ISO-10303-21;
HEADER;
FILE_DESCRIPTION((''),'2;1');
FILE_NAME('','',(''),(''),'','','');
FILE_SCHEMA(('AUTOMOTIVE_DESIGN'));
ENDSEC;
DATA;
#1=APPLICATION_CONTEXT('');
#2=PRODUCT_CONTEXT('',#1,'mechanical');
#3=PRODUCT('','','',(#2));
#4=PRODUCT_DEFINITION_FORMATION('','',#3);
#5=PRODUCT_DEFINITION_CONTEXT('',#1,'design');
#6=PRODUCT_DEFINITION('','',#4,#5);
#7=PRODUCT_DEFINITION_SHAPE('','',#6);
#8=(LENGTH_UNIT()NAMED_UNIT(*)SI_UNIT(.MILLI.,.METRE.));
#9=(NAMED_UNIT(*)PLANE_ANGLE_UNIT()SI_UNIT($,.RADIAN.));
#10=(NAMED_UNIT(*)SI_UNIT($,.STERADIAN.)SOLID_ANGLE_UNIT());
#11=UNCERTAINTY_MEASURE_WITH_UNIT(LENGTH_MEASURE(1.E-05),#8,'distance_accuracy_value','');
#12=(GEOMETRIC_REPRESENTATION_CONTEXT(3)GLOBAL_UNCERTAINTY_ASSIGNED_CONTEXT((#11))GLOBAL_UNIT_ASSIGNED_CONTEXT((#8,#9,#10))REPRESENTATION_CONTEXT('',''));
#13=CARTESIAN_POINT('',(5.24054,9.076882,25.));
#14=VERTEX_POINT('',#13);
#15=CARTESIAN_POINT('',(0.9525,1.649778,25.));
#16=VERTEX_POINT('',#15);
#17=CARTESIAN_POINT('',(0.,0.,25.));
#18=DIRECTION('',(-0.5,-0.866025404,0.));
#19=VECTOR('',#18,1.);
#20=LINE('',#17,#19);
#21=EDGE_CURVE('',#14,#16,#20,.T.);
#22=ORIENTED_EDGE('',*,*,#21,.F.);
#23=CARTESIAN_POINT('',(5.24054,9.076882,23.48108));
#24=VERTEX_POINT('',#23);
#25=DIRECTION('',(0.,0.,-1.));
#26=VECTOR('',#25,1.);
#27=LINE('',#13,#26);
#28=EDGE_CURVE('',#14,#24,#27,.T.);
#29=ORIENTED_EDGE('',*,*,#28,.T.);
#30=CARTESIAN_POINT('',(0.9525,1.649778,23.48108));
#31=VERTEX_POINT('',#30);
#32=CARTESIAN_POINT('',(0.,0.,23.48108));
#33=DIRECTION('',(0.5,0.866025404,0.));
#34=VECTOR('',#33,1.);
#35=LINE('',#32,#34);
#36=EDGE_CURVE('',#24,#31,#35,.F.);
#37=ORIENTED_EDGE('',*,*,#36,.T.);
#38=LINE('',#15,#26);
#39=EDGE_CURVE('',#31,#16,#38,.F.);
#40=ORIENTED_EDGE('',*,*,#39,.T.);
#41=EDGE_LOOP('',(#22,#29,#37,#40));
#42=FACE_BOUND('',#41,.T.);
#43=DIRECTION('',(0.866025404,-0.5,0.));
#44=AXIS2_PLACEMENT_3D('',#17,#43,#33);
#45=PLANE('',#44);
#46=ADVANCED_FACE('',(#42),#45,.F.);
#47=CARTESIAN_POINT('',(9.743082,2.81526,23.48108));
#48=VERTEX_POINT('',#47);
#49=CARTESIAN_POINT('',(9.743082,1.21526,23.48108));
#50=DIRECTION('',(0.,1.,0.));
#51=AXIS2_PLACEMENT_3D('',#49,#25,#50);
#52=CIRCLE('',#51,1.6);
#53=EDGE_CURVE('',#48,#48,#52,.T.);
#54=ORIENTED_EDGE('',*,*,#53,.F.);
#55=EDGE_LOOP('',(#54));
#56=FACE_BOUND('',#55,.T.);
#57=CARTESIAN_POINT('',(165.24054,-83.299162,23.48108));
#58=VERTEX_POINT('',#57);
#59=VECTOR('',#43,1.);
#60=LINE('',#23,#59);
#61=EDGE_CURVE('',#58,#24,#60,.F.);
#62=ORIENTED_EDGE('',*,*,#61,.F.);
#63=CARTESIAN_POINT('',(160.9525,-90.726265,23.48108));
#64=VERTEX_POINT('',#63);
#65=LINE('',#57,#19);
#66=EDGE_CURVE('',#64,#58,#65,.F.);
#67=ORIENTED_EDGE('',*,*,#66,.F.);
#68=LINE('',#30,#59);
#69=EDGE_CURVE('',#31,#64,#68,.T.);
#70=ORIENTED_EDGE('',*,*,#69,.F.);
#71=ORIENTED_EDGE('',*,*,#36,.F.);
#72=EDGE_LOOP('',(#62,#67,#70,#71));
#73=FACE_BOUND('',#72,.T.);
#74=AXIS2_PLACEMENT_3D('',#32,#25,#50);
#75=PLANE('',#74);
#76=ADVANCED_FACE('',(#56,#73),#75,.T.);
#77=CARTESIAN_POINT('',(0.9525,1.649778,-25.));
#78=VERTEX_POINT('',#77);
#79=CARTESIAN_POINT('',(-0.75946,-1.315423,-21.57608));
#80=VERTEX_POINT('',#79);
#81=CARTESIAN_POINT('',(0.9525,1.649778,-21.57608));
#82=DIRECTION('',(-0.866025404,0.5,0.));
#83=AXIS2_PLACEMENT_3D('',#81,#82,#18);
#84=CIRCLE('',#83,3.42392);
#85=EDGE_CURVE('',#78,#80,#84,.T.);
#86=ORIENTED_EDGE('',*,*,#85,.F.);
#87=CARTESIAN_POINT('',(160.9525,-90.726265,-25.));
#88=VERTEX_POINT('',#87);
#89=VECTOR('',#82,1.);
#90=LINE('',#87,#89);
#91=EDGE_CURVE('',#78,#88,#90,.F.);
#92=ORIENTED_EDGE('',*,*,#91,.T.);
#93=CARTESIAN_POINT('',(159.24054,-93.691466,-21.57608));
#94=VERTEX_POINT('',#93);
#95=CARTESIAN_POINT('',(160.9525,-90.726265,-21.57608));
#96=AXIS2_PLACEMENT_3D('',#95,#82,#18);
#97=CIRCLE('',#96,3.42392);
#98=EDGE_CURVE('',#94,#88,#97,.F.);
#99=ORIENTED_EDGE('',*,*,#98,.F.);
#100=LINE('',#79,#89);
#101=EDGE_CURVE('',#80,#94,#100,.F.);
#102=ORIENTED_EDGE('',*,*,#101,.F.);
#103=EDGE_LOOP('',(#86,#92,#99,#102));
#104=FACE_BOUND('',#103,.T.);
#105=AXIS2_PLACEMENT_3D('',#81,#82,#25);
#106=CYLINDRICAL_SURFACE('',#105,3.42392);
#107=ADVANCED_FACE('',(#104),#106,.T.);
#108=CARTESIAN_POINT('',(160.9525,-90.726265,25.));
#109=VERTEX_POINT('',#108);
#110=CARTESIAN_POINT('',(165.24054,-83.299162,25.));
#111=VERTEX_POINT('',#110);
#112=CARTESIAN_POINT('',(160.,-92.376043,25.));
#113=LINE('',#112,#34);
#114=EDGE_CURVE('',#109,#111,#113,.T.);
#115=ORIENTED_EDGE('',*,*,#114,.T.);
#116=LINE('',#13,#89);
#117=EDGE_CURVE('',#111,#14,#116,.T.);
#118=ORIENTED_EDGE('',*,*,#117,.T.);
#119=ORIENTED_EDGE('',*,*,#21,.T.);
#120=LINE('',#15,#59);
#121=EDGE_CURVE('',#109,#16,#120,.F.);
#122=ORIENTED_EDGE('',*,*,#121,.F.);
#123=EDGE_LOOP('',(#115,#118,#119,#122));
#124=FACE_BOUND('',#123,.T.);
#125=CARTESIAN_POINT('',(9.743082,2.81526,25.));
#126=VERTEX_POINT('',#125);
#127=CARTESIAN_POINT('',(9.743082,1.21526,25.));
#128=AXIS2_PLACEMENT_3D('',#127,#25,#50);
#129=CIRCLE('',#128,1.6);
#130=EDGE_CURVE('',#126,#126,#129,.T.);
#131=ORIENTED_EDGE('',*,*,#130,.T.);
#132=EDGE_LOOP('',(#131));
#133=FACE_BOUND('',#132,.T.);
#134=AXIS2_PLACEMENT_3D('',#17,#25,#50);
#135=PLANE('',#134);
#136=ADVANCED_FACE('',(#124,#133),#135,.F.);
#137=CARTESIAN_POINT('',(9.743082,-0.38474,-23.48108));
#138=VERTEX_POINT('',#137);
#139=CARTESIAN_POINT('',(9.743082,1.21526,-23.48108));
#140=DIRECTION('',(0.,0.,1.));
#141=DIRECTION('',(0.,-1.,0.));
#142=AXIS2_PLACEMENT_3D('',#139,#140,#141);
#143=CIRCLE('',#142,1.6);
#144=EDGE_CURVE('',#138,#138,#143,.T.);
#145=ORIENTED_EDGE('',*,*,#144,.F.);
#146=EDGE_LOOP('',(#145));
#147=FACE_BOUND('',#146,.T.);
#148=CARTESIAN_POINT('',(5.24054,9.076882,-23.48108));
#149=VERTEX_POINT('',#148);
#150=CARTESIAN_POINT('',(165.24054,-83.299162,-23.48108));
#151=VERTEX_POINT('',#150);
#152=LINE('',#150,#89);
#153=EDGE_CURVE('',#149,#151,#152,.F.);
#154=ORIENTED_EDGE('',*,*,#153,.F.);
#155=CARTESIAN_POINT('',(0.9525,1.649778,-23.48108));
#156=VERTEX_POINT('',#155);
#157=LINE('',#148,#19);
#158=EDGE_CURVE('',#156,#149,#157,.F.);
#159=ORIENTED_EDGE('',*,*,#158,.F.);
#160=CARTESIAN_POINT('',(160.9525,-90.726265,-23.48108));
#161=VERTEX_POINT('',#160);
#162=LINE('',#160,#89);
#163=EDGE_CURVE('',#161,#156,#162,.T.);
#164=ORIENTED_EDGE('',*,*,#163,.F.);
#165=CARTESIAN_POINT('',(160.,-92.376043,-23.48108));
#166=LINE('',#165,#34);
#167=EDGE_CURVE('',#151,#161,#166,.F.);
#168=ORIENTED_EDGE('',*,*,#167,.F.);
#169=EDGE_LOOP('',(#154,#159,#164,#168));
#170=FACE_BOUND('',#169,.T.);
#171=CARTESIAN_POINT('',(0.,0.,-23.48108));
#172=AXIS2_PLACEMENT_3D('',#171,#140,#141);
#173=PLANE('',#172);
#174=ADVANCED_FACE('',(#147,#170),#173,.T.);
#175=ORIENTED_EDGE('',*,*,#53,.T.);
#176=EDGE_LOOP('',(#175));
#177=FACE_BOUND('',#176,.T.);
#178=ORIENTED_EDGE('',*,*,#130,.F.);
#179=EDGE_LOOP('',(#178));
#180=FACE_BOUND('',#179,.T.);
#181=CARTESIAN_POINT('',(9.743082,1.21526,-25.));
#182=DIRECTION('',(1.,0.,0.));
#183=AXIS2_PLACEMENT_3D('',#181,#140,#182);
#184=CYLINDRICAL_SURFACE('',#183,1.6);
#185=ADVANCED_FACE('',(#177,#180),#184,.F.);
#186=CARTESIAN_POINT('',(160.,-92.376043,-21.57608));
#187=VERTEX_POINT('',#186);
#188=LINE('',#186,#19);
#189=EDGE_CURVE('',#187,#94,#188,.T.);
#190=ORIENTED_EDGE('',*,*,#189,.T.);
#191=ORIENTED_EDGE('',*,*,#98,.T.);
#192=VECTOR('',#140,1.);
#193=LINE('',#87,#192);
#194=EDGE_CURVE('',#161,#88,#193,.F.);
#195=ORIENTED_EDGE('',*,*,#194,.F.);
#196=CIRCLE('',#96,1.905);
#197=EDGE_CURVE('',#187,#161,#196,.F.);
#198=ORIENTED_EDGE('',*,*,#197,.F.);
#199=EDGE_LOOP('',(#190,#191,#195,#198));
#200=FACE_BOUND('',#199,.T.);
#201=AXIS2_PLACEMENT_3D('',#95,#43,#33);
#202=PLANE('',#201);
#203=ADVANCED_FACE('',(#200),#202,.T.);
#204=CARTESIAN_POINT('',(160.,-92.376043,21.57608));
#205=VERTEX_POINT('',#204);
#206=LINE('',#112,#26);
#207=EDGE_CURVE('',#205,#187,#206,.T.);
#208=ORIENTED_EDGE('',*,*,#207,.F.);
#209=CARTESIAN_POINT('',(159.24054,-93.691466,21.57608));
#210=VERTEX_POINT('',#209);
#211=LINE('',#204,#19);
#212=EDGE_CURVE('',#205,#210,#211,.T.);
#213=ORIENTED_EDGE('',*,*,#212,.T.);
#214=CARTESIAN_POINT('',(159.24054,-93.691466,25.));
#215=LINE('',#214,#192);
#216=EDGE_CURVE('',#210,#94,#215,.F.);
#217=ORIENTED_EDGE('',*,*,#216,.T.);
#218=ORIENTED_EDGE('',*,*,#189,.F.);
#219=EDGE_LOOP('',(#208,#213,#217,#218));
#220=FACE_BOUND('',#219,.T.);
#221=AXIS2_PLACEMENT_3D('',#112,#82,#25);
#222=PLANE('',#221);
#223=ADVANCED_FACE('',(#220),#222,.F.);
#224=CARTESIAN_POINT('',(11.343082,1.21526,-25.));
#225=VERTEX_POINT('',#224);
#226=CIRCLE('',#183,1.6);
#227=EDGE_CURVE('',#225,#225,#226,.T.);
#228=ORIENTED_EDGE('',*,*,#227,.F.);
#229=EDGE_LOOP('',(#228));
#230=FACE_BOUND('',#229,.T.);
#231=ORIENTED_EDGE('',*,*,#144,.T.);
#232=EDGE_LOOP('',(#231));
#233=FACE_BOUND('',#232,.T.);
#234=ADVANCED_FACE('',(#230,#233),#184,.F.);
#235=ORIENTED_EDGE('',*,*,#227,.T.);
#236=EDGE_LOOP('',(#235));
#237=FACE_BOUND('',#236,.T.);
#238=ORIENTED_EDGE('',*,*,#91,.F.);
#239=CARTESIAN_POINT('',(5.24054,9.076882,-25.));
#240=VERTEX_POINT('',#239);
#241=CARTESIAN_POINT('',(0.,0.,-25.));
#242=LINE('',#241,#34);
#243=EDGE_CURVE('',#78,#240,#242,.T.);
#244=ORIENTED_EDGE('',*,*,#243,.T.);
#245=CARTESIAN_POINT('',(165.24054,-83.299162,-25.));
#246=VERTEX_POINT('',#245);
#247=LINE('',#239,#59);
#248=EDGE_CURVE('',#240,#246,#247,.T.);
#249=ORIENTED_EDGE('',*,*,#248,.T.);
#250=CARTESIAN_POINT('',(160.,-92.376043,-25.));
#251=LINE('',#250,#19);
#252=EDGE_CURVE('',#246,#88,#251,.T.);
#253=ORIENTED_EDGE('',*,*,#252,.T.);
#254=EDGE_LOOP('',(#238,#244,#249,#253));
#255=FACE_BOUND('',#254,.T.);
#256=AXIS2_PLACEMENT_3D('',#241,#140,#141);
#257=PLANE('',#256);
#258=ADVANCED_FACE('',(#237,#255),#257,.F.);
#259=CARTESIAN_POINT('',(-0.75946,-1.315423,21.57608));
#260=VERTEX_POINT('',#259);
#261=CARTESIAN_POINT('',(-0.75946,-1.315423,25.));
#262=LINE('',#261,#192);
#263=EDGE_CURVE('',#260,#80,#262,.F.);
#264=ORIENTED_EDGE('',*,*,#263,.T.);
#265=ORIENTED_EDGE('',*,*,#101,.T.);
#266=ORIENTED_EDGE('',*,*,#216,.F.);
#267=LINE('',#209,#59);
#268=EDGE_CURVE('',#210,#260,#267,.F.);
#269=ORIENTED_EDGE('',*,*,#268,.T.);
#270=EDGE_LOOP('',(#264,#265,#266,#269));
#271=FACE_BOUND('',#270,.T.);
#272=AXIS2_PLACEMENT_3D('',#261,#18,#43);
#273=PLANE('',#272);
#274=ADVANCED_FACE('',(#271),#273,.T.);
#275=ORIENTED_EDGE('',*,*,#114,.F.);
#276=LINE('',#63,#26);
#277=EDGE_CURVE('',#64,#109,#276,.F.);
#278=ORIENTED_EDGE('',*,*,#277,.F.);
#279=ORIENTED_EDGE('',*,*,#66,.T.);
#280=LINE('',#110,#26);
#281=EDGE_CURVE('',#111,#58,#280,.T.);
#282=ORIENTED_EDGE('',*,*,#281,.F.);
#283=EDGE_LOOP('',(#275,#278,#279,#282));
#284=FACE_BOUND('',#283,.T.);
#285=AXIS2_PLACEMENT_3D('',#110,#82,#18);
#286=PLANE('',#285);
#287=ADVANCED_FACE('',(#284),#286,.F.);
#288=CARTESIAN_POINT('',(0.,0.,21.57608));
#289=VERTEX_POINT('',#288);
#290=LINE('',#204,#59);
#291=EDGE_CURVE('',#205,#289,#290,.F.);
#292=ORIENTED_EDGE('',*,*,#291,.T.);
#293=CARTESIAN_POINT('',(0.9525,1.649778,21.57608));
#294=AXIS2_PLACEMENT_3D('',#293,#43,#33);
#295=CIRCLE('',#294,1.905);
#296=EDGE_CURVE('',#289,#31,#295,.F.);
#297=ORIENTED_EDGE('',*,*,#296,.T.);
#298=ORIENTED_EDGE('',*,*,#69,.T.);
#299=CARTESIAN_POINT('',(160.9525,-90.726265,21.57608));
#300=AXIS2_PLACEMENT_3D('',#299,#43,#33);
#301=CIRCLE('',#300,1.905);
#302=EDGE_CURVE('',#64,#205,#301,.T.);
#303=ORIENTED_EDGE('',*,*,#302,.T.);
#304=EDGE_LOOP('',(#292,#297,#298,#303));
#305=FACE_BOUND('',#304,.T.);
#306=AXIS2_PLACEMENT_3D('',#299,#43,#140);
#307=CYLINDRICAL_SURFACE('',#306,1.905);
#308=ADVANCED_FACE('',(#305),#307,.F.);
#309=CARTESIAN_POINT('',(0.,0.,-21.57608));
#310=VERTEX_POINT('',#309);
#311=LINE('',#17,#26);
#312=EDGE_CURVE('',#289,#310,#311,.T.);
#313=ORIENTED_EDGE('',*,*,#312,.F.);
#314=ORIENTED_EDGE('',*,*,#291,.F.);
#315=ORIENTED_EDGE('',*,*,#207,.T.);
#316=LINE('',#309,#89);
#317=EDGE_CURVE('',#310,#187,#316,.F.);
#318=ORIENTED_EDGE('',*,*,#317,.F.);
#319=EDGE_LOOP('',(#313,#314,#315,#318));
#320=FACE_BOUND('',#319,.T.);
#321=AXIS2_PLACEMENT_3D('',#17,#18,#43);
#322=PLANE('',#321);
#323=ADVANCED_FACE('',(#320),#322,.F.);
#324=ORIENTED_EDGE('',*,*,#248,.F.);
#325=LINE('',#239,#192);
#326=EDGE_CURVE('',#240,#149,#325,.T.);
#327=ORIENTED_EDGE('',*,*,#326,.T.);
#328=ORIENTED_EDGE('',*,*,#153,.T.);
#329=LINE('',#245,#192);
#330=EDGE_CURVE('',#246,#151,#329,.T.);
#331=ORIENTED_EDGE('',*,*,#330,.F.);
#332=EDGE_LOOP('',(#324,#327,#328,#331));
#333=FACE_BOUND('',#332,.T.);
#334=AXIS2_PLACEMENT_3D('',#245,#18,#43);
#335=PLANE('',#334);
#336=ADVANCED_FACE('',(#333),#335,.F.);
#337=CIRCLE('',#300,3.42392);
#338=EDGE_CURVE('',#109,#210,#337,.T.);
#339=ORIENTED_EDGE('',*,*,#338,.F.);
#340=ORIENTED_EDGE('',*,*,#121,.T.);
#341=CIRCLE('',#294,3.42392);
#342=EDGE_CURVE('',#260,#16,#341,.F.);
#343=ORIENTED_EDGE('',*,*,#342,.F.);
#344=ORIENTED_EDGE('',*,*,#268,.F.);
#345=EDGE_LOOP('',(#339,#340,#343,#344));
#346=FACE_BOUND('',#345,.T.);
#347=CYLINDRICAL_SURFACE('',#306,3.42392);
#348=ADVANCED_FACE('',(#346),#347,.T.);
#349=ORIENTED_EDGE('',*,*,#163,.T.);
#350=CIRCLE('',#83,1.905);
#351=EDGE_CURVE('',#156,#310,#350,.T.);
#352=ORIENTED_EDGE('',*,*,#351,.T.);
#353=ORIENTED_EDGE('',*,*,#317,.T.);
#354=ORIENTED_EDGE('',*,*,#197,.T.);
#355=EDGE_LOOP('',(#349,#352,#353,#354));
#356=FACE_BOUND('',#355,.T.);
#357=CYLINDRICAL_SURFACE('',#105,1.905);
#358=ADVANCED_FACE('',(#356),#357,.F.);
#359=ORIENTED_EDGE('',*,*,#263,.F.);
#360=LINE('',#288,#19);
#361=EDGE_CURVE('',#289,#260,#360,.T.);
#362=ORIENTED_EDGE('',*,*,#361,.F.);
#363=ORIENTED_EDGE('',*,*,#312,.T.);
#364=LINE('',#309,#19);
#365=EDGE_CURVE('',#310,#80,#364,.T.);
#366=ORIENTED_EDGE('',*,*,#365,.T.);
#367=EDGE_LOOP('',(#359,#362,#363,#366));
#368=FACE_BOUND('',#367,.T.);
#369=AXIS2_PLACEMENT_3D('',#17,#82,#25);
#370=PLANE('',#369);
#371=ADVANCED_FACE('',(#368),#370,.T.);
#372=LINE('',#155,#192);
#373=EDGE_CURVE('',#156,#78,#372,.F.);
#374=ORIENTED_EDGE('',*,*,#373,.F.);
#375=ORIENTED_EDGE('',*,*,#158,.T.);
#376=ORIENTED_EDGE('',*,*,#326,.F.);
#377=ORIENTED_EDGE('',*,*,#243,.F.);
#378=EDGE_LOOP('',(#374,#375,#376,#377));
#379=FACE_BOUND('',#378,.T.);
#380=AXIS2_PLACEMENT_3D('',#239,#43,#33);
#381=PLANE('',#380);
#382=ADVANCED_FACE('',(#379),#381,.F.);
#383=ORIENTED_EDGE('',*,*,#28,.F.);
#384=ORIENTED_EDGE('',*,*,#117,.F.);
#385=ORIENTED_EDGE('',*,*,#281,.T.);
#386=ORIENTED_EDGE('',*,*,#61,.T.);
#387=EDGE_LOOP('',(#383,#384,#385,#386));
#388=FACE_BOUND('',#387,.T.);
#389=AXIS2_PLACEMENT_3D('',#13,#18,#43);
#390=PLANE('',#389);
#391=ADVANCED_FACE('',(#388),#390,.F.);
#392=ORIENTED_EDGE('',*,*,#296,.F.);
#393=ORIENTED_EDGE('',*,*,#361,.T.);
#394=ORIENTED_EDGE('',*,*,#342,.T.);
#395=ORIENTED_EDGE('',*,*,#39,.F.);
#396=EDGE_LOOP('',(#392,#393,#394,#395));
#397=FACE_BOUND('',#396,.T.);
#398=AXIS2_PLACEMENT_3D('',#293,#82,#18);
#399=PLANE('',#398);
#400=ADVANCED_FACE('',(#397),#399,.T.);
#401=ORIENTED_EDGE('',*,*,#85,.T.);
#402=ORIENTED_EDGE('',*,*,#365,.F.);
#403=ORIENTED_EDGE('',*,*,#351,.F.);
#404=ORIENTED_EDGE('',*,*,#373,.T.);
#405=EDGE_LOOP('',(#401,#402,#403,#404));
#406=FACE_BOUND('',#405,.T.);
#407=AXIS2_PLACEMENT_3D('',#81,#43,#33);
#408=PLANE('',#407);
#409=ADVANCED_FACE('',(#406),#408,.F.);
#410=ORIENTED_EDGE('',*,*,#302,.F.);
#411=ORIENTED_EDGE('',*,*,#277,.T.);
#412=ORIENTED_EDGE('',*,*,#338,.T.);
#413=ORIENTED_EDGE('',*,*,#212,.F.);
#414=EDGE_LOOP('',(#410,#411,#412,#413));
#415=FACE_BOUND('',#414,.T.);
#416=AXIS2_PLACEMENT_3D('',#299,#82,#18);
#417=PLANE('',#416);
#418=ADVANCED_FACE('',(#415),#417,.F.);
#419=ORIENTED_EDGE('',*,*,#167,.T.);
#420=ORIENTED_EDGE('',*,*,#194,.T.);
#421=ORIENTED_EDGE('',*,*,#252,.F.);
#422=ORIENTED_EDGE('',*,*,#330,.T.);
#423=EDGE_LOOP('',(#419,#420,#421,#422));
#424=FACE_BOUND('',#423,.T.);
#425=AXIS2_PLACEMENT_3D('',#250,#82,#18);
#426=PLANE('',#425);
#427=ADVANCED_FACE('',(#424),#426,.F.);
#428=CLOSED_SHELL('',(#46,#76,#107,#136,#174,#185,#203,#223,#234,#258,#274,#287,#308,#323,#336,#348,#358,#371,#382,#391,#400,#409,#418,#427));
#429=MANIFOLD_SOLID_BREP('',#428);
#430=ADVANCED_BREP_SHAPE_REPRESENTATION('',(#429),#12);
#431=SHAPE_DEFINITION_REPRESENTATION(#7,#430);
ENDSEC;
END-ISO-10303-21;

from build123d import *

# Parameters (mm, degrees)
BOSS_EXTRUDE1_DEPTH            = 25
CONVERT_SOLID1_START           = -1.51892
CONVERT_SOLID1_OUTLINE_W       = 184.752086141
CONVERT_SOLID1_OUTLINE_H       = 50
CONVERT_SOLID1_DEPTH           = 0.01892
EDGE_FLANGE1_STRIP_W           = 9.88568
EDGE_FLANGE1_STRIP_H           = 1.51892
EDGE_FLANGE1_STRIP_CUT_DEPTH   = 184.752086141
EDGE_FLANGE1_STRIP_2_W         = 9.88568
EDGE_FLANGE1_STRIP_2_H         = 1.51892
EDGE_FLANGE1_STRIP_CUT_2_DEPTH = 184.752086141
EDGE_FLANGE1_DEPTH             = 184.752086141
EDGE_FLANGE1_BEND_DEPTH        = 184.752086141
CUT_EXTRUDE2_DEPTH             = 197.424354221
CUT_EXTRUDE2_DEPTH_BACK        = 197.424354221
SKETCH13_R                     = 1.6


# Read off the part's stored shape, not the designer's step: Convert-Solid1
# Sheet-metal steps are written as plain solids
with BuildPart() as part:
    # Sketch2 → Boss-Extrude1 (new, symmetric)
    with BuildSketch(Plane.XY):
        Polygon((0, 0), (160, -92.37604307), (159.25, -93.675081176), (-0.75, -1.299038106), align=None)
    extrude(amount=BOSS_EXTRUDE1_DEPTH, both=True)

    # Convert-Solid1 outline → Convert-Solid1 (add)
    with BuildSketch(Plane(origin=(0, 0, 0), x_dir=(0.866025403784438, -0.500000000000001, 0), z_dir=(0.500000000000001, 0.866025403784438, 0)).offset(CONVERT_SOLID1_START)):
        with Locations((92.376043071, 0)):
            Rectangle(CONVERT_SOLID1_OUTLINE_W, CONVERT_SOLID1_OUTLINE_H)
    extrude(amount=CONVERT_SOLID1_DEPTH)

    # Edge-Flange1 strip (across the edge) → Edge-Flange1 strip cut (cut)
    with BuildSketch(Plane(origin=(160, -92.37604307, -25), x_dir=(0, 0, 1), z_dir=(-0.866025403784438, 0.5000000000000011, 0))):
        with Locations((-1.51892, -0.75946)):
            Rectangle(EDGE_FLANGE1_STRIP_W, EDGE_FLANGE1_STRIP_H)
    extrude(amount=EDGE_FLANGE1_STRIP_CUT_DEPTH, mode=Mode.SUBTRACT)

    # Edge-Flange1 strip 2 (across the edge) → Edge-Flange1 strip cut 2 (cut)
    with BuildSketch(Plane(origin=(0, 0, 25), x_dir=(0, 0, -1), z_dir=(0.866025403784438, -0.5000000000000011, 0))):
        with Locations((-1.51892, -0.75946)):
            Rectangle(EDGE_FLANGE1_STRIP_2_W, EDGE_FLANGE1_STRIP_2_H)
    extrude(amount=EDGE_FLANGE1_STRIP_CUT_2_DEPTH, mode=Mode.SUBTRACT)

    # Edge-Flange1 section (across the edge) → Edge-Flange1 (add)
    with BuildSketch(Plane(origin=(160, -92.37604307, -25), x_dir=(0, 0, 1), z_dir=(-0.866025403784438, 0.5000000000000011, 0))):
        with BuildLine():
            Line((0, 1.905), (0, 10.48108))
            Line((0, 10.48108), (1.51892, 10.48108))
            Line((1.51892, 10.48108), (1.51892, 1.905))
            ThreePointArc((1.51892, 1.905), (2.076881582, 0.557961582), (3.42392, 0))
            Line((3.42392, 0), (3.42392, -1.51892))
            ThreePointArc((3.42392, -1.51892), (1.00284295, -0.51607705), (0, 1.905))
        make_face()
    extrude(amount=EDGE_FLANGE1_DEPTH)

    # Edge-Flange1 section 2 (across the edge) → Edge-Flange1 bend (add)
    with BuildSketch(Plane(origin=(0, 0, 25), x_dir=(0, 0, -1), z_dir=(0.866025403784438, -0.5000000000000011, 0))):
        with BuildLine():
            Line((0, 1.905), (0, 10.48108))
            Line((0, 10.48108), (1.51892, 10.48108))
            Line((1.51892, 10.48108), (1.51892, 1.905))
            ThreePointArc((1.51892, 1.905), (2.076881582, 0.557961582), (3.42392, 0))
            Line((3.42392, 0), (3.42392, -1.51892))
            ThreePointArc((3.42392, -1.51892), (1.00284295, -0.51607705), (0, 1.905))
        make_face()
    extrude(amount=EDGE_FLANGE1_BEND_DEPTH)

    # Sketch13 → Cut-Extrude2 (cut, two sides: drawn at the far end of the back side and taken through both)
    with BuildSketch(Plane.XY.offset(25).offset(-CUT_EXTRUDE2_DEPTH_BACK)):
        with Locations(Location((9.743082385, 1.215259675, 0), (0, 0, 90))):
            Circle(SKETCH13_R)
    extrude(amount=CUT_EXTRUDE2_DEPTH + CUT_EXTRUDE2_DEPTH_BACK, mode=Mode.SUBTRACT)


solid = part.part
